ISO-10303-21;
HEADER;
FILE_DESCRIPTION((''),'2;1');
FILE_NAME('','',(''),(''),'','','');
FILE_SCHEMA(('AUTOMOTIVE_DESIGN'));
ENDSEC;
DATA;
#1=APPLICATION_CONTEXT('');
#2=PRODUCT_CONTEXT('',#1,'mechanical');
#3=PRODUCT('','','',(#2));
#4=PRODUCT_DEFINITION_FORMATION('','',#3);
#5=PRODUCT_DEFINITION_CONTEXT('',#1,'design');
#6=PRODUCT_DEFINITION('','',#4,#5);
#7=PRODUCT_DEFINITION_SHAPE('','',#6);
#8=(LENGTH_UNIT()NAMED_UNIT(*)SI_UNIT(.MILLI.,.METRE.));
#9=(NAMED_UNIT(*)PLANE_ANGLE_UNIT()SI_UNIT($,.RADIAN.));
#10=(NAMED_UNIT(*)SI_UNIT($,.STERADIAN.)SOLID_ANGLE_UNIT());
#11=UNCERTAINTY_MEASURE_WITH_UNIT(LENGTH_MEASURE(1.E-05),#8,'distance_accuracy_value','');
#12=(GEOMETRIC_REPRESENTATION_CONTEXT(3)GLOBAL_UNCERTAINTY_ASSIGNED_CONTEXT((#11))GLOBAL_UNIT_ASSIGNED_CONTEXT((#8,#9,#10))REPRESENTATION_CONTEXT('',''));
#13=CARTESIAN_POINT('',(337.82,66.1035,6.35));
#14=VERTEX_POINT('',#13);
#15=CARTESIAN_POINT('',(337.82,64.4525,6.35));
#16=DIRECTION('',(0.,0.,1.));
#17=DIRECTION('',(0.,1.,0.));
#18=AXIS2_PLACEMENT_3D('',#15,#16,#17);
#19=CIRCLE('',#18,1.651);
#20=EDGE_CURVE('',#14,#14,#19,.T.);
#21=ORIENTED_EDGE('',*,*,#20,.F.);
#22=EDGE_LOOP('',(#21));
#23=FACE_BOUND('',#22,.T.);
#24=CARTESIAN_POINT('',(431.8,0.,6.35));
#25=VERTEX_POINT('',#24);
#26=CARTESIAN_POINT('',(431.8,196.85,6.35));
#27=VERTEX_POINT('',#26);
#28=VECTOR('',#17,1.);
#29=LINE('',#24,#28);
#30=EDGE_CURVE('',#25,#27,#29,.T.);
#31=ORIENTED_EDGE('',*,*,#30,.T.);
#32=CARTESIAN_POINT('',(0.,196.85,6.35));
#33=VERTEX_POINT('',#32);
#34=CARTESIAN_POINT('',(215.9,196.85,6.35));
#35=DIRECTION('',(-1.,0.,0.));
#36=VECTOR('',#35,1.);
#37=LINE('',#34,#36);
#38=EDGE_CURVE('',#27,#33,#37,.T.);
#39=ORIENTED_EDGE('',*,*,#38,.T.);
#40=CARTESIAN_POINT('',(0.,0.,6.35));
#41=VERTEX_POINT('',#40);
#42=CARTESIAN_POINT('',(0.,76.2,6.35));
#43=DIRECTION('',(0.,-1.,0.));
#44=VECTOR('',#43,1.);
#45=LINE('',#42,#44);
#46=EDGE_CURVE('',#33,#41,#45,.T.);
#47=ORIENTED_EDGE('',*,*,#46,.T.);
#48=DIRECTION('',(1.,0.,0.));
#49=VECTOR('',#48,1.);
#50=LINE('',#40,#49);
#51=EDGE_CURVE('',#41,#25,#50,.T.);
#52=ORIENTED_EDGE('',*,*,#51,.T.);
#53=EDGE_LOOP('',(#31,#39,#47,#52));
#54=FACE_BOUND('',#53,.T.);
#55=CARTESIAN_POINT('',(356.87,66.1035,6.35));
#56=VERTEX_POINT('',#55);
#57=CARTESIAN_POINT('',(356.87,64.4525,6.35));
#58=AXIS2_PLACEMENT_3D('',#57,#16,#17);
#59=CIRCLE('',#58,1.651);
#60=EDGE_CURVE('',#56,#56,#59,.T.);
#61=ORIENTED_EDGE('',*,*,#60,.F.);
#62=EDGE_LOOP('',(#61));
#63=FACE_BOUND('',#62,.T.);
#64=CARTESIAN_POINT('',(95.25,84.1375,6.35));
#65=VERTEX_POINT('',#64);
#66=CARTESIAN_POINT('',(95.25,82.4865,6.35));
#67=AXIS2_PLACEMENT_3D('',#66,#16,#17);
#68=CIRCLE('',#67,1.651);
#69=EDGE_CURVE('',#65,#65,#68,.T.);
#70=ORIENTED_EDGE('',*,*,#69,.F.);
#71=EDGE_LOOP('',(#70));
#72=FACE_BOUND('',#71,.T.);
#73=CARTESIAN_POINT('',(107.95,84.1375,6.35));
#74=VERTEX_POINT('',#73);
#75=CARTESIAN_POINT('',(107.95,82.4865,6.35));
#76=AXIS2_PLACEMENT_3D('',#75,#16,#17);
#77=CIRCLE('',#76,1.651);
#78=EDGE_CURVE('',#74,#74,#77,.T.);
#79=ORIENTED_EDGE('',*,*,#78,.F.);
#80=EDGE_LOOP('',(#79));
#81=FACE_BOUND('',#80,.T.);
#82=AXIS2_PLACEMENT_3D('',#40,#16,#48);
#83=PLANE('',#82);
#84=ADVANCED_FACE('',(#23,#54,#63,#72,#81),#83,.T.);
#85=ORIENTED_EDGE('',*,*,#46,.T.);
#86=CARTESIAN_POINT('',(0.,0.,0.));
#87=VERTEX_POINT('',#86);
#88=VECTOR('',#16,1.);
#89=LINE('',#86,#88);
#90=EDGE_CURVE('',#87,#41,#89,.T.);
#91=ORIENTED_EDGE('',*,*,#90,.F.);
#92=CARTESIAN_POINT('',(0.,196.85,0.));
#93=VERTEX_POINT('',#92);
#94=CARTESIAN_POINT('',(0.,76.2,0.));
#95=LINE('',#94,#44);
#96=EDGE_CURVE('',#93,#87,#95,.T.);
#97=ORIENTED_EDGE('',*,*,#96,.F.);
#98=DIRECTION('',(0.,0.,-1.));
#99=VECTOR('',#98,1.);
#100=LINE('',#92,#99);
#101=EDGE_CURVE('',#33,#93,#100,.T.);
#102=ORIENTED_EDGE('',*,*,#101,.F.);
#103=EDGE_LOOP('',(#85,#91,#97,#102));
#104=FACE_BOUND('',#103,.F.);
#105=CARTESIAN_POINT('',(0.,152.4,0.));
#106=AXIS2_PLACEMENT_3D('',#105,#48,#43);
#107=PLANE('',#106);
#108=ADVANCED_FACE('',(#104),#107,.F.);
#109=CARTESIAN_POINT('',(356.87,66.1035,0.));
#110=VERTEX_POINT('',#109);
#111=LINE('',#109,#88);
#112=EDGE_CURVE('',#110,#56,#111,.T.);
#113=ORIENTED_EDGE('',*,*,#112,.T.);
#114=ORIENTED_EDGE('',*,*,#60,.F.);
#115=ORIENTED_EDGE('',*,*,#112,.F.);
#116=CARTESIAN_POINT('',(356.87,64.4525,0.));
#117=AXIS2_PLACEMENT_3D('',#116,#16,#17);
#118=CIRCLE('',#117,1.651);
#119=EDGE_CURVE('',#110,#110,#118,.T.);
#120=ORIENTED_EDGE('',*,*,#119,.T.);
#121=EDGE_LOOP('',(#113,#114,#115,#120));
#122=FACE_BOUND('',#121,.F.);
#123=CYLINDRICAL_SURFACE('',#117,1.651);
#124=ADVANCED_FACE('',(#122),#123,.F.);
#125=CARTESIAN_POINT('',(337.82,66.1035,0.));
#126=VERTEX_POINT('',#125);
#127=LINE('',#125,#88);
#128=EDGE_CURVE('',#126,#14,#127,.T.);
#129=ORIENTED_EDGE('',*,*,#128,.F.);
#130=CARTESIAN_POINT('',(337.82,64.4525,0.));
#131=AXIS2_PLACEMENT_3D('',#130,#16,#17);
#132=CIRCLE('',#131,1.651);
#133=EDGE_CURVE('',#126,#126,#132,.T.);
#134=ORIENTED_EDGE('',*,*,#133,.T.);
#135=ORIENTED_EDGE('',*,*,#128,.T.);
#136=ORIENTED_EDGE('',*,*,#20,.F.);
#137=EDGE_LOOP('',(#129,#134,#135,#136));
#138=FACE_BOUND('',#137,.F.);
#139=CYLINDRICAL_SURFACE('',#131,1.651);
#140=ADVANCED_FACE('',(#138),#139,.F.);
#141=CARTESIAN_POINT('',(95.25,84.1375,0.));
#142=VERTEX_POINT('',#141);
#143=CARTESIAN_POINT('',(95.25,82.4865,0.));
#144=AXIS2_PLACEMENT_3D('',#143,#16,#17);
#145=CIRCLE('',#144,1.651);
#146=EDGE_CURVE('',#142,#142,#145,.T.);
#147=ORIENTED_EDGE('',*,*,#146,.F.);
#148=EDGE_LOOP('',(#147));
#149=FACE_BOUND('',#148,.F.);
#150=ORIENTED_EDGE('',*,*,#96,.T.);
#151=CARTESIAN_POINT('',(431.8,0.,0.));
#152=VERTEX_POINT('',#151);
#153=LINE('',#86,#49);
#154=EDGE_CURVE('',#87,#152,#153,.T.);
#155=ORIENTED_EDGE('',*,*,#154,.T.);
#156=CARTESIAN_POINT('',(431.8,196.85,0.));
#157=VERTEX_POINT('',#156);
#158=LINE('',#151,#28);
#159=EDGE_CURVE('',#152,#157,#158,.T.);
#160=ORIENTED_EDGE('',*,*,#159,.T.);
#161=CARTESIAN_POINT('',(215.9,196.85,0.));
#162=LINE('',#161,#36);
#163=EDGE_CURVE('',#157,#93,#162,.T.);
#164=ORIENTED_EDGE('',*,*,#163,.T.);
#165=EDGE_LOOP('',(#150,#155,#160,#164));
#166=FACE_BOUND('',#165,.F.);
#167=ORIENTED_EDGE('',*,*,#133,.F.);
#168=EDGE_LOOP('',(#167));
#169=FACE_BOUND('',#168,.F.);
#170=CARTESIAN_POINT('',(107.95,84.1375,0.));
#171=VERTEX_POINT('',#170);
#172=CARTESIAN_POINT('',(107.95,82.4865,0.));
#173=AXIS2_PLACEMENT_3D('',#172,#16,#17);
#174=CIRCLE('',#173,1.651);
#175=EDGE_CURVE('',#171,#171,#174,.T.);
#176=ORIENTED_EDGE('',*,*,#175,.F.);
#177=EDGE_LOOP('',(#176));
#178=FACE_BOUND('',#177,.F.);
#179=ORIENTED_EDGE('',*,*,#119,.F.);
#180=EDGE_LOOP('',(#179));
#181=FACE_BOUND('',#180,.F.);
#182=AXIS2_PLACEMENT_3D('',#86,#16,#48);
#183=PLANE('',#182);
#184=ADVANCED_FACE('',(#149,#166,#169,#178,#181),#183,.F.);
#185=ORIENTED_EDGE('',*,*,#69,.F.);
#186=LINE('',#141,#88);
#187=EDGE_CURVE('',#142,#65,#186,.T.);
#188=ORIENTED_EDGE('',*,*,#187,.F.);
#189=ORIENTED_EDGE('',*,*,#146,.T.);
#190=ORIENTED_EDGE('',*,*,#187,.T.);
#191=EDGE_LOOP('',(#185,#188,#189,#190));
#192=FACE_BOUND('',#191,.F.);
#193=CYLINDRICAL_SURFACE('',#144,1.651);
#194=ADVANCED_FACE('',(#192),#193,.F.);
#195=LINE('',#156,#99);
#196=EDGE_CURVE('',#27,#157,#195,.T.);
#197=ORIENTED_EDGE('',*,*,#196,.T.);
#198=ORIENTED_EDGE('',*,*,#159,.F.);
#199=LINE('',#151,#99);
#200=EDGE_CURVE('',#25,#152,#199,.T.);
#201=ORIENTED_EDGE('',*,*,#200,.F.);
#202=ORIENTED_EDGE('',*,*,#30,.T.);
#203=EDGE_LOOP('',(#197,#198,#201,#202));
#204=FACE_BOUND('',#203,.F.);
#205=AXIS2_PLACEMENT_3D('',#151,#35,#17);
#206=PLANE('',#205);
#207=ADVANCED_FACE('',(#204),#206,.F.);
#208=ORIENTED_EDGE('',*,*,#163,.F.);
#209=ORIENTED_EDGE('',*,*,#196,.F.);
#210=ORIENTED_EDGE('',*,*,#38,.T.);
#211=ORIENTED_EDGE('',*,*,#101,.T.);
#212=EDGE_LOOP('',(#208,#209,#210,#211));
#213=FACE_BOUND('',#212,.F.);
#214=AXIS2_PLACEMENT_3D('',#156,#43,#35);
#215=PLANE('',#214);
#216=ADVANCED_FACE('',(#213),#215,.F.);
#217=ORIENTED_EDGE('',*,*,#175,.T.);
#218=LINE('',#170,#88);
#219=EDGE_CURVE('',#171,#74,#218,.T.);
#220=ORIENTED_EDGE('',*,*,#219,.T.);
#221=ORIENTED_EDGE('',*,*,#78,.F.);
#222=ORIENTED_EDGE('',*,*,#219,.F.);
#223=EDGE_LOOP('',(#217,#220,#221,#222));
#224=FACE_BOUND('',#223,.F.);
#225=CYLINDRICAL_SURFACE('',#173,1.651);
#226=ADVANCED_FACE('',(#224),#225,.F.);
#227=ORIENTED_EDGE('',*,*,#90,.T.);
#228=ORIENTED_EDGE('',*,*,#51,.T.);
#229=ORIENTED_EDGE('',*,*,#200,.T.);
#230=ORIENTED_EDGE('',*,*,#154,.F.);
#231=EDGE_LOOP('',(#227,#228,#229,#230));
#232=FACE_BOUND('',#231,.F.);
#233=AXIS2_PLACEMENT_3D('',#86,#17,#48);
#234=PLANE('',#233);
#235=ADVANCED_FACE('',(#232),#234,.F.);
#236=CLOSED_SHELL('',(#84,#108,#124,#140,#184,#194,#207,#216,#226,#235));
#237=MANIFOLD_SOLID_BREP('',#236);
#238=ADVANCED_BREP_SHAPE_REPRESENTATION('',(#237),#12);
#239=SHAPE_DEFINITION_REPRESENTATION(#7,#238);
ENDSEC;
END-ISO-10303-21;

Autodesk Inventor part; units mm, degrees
ref_plane "YZ Plane" through (0, 0, 0) normal (1, 0, 0) x (0, 1, 0)
ref_plane "XZ Plane" through (0, 0, 0) normal (0, 1, 0) x (-1, 0, 0)
ref_plane "XY Plane" through (0, 0, 0) normal (0, 0, 1) x (1, 0, 0)
sketch "Sketch1" plane through (0, 0, 0) normal (0, 0, 1) x (1, 0, 0)
  line L0 (0, 0) -> (431.8, 0)
  line L1 (431.8, 0) -> (431.8, 152.4)
  line L2 (431.8, 152.4) -> (0, 152.4)
  line L3 (0, 152.4) -> (0, 0)
  dimension "d0" = 431.8
  dimension "d1" = 152.4
extrude "Extrusion1" add sketch "Sketch1" along normal blind 6.35
thicken "Thicken1" operation add thickness 44.45 both sides no extend neighbours yes toward (0, 1, 0) faces at (287.8667, 152.4, 4.2333)
sketch "Sketch3" plane through (0, 0, 0) normal (0, 0, -1) x (-1, 0, 0)
  line L0 (0, 196.85) -> (0, 0) projected
  line L1 (0, 0) -> (-431.8, 0) projected
  line L2 (-88.9, 0) -> (-88.9, 77.724)
  line L3 (-88.9, 0) -> (-11.176, 0) construction
  line L4 (-88.9, 77.724) -> (0, 77.724)
  line L5 (0, 196.85) -> (0, 0) projected
  line L6 (-88.9, 77.724) -> (-114.3, 77.724)
  line L7 (-114.3, 77.724) -> (-114.3, 87.249)
  line L8 (-114.3, 87.249) -> (-88.9, 87.249)
  line L9 (-88.9, 87.249) -> (-88.9, 77.724)
  line L10 (-88.9, 82.4865) -> (-95.25, 82.4865)
  line L11 (-114.3, 82.4865) -> (-107.95, 82.4865)
  dimension "d8" = 77.724
  dimension "d9" = 90
  dimension "d10" = 88.9
  dimension "d11" = 25.4
  dimension "d12" = 9.525
  dimension "d13" = 6.35
  dimension "d14" = 6.35
hole "Hole1" at (107.95, 82.4865, 0) at (95.25, 82.4865, 0) direction (0, 0, 1) diameter 3.302 depth 25.4 tip angle 118
sketch "Sketch5" plane through (0, 0, 0) normal (0, 0, -1) x (-1, 0, 0)
  line L0 (-431.8, 0) -> (-431.8, 196.85) projected
  line L1 (-431.8, 59.69) -> (-369.57, 59.69)
  line L2 (-431.8, 59.69) -> (-369.57, 59.69) construction
  line L3 (0, 0) -> (-431.8, 0) projected
  line L4 (-369.57, 0) -> (-369.57, 59.69)
  line L5 (-369.57, 0) -> (-309.88, 0) construction
  line L6 (-369.57, 59.69) -> (-325.12, 59.69)
  line L7 (-325.12, 59.69) -> (-325.12, 69.215)
  line L8 (-325.12, 69.215) -> (-369.57, 69.215)
  line L9 (-369.57, 69.215) -> (-369.57, 59.69)
  line L10 (-369.57, 64.4525) -> (-356.87, 64.4525)
  line L11 (-325.12, 64.4525) -> (-337.82, 64.4525)
  dimension "d22" = 62.23
  dimension "d23" = 0
  dimension "d24" = 59.69
  dimension "d25" = 90
  dimension "d26" = 0
  dimension "d27" = 44.45
  dimension "d28" = 9.525
  dimension "d29" = 12.7
  dimension "d30" = 12.7
hole "Hole2" at (356.87, 64.4525, 0) at (337.82, 64.4525, 0) direction (0, 0, 1) diameter 3.302 depth 25.4 tip angle 118
properties part number "PossibleTopPlate"
